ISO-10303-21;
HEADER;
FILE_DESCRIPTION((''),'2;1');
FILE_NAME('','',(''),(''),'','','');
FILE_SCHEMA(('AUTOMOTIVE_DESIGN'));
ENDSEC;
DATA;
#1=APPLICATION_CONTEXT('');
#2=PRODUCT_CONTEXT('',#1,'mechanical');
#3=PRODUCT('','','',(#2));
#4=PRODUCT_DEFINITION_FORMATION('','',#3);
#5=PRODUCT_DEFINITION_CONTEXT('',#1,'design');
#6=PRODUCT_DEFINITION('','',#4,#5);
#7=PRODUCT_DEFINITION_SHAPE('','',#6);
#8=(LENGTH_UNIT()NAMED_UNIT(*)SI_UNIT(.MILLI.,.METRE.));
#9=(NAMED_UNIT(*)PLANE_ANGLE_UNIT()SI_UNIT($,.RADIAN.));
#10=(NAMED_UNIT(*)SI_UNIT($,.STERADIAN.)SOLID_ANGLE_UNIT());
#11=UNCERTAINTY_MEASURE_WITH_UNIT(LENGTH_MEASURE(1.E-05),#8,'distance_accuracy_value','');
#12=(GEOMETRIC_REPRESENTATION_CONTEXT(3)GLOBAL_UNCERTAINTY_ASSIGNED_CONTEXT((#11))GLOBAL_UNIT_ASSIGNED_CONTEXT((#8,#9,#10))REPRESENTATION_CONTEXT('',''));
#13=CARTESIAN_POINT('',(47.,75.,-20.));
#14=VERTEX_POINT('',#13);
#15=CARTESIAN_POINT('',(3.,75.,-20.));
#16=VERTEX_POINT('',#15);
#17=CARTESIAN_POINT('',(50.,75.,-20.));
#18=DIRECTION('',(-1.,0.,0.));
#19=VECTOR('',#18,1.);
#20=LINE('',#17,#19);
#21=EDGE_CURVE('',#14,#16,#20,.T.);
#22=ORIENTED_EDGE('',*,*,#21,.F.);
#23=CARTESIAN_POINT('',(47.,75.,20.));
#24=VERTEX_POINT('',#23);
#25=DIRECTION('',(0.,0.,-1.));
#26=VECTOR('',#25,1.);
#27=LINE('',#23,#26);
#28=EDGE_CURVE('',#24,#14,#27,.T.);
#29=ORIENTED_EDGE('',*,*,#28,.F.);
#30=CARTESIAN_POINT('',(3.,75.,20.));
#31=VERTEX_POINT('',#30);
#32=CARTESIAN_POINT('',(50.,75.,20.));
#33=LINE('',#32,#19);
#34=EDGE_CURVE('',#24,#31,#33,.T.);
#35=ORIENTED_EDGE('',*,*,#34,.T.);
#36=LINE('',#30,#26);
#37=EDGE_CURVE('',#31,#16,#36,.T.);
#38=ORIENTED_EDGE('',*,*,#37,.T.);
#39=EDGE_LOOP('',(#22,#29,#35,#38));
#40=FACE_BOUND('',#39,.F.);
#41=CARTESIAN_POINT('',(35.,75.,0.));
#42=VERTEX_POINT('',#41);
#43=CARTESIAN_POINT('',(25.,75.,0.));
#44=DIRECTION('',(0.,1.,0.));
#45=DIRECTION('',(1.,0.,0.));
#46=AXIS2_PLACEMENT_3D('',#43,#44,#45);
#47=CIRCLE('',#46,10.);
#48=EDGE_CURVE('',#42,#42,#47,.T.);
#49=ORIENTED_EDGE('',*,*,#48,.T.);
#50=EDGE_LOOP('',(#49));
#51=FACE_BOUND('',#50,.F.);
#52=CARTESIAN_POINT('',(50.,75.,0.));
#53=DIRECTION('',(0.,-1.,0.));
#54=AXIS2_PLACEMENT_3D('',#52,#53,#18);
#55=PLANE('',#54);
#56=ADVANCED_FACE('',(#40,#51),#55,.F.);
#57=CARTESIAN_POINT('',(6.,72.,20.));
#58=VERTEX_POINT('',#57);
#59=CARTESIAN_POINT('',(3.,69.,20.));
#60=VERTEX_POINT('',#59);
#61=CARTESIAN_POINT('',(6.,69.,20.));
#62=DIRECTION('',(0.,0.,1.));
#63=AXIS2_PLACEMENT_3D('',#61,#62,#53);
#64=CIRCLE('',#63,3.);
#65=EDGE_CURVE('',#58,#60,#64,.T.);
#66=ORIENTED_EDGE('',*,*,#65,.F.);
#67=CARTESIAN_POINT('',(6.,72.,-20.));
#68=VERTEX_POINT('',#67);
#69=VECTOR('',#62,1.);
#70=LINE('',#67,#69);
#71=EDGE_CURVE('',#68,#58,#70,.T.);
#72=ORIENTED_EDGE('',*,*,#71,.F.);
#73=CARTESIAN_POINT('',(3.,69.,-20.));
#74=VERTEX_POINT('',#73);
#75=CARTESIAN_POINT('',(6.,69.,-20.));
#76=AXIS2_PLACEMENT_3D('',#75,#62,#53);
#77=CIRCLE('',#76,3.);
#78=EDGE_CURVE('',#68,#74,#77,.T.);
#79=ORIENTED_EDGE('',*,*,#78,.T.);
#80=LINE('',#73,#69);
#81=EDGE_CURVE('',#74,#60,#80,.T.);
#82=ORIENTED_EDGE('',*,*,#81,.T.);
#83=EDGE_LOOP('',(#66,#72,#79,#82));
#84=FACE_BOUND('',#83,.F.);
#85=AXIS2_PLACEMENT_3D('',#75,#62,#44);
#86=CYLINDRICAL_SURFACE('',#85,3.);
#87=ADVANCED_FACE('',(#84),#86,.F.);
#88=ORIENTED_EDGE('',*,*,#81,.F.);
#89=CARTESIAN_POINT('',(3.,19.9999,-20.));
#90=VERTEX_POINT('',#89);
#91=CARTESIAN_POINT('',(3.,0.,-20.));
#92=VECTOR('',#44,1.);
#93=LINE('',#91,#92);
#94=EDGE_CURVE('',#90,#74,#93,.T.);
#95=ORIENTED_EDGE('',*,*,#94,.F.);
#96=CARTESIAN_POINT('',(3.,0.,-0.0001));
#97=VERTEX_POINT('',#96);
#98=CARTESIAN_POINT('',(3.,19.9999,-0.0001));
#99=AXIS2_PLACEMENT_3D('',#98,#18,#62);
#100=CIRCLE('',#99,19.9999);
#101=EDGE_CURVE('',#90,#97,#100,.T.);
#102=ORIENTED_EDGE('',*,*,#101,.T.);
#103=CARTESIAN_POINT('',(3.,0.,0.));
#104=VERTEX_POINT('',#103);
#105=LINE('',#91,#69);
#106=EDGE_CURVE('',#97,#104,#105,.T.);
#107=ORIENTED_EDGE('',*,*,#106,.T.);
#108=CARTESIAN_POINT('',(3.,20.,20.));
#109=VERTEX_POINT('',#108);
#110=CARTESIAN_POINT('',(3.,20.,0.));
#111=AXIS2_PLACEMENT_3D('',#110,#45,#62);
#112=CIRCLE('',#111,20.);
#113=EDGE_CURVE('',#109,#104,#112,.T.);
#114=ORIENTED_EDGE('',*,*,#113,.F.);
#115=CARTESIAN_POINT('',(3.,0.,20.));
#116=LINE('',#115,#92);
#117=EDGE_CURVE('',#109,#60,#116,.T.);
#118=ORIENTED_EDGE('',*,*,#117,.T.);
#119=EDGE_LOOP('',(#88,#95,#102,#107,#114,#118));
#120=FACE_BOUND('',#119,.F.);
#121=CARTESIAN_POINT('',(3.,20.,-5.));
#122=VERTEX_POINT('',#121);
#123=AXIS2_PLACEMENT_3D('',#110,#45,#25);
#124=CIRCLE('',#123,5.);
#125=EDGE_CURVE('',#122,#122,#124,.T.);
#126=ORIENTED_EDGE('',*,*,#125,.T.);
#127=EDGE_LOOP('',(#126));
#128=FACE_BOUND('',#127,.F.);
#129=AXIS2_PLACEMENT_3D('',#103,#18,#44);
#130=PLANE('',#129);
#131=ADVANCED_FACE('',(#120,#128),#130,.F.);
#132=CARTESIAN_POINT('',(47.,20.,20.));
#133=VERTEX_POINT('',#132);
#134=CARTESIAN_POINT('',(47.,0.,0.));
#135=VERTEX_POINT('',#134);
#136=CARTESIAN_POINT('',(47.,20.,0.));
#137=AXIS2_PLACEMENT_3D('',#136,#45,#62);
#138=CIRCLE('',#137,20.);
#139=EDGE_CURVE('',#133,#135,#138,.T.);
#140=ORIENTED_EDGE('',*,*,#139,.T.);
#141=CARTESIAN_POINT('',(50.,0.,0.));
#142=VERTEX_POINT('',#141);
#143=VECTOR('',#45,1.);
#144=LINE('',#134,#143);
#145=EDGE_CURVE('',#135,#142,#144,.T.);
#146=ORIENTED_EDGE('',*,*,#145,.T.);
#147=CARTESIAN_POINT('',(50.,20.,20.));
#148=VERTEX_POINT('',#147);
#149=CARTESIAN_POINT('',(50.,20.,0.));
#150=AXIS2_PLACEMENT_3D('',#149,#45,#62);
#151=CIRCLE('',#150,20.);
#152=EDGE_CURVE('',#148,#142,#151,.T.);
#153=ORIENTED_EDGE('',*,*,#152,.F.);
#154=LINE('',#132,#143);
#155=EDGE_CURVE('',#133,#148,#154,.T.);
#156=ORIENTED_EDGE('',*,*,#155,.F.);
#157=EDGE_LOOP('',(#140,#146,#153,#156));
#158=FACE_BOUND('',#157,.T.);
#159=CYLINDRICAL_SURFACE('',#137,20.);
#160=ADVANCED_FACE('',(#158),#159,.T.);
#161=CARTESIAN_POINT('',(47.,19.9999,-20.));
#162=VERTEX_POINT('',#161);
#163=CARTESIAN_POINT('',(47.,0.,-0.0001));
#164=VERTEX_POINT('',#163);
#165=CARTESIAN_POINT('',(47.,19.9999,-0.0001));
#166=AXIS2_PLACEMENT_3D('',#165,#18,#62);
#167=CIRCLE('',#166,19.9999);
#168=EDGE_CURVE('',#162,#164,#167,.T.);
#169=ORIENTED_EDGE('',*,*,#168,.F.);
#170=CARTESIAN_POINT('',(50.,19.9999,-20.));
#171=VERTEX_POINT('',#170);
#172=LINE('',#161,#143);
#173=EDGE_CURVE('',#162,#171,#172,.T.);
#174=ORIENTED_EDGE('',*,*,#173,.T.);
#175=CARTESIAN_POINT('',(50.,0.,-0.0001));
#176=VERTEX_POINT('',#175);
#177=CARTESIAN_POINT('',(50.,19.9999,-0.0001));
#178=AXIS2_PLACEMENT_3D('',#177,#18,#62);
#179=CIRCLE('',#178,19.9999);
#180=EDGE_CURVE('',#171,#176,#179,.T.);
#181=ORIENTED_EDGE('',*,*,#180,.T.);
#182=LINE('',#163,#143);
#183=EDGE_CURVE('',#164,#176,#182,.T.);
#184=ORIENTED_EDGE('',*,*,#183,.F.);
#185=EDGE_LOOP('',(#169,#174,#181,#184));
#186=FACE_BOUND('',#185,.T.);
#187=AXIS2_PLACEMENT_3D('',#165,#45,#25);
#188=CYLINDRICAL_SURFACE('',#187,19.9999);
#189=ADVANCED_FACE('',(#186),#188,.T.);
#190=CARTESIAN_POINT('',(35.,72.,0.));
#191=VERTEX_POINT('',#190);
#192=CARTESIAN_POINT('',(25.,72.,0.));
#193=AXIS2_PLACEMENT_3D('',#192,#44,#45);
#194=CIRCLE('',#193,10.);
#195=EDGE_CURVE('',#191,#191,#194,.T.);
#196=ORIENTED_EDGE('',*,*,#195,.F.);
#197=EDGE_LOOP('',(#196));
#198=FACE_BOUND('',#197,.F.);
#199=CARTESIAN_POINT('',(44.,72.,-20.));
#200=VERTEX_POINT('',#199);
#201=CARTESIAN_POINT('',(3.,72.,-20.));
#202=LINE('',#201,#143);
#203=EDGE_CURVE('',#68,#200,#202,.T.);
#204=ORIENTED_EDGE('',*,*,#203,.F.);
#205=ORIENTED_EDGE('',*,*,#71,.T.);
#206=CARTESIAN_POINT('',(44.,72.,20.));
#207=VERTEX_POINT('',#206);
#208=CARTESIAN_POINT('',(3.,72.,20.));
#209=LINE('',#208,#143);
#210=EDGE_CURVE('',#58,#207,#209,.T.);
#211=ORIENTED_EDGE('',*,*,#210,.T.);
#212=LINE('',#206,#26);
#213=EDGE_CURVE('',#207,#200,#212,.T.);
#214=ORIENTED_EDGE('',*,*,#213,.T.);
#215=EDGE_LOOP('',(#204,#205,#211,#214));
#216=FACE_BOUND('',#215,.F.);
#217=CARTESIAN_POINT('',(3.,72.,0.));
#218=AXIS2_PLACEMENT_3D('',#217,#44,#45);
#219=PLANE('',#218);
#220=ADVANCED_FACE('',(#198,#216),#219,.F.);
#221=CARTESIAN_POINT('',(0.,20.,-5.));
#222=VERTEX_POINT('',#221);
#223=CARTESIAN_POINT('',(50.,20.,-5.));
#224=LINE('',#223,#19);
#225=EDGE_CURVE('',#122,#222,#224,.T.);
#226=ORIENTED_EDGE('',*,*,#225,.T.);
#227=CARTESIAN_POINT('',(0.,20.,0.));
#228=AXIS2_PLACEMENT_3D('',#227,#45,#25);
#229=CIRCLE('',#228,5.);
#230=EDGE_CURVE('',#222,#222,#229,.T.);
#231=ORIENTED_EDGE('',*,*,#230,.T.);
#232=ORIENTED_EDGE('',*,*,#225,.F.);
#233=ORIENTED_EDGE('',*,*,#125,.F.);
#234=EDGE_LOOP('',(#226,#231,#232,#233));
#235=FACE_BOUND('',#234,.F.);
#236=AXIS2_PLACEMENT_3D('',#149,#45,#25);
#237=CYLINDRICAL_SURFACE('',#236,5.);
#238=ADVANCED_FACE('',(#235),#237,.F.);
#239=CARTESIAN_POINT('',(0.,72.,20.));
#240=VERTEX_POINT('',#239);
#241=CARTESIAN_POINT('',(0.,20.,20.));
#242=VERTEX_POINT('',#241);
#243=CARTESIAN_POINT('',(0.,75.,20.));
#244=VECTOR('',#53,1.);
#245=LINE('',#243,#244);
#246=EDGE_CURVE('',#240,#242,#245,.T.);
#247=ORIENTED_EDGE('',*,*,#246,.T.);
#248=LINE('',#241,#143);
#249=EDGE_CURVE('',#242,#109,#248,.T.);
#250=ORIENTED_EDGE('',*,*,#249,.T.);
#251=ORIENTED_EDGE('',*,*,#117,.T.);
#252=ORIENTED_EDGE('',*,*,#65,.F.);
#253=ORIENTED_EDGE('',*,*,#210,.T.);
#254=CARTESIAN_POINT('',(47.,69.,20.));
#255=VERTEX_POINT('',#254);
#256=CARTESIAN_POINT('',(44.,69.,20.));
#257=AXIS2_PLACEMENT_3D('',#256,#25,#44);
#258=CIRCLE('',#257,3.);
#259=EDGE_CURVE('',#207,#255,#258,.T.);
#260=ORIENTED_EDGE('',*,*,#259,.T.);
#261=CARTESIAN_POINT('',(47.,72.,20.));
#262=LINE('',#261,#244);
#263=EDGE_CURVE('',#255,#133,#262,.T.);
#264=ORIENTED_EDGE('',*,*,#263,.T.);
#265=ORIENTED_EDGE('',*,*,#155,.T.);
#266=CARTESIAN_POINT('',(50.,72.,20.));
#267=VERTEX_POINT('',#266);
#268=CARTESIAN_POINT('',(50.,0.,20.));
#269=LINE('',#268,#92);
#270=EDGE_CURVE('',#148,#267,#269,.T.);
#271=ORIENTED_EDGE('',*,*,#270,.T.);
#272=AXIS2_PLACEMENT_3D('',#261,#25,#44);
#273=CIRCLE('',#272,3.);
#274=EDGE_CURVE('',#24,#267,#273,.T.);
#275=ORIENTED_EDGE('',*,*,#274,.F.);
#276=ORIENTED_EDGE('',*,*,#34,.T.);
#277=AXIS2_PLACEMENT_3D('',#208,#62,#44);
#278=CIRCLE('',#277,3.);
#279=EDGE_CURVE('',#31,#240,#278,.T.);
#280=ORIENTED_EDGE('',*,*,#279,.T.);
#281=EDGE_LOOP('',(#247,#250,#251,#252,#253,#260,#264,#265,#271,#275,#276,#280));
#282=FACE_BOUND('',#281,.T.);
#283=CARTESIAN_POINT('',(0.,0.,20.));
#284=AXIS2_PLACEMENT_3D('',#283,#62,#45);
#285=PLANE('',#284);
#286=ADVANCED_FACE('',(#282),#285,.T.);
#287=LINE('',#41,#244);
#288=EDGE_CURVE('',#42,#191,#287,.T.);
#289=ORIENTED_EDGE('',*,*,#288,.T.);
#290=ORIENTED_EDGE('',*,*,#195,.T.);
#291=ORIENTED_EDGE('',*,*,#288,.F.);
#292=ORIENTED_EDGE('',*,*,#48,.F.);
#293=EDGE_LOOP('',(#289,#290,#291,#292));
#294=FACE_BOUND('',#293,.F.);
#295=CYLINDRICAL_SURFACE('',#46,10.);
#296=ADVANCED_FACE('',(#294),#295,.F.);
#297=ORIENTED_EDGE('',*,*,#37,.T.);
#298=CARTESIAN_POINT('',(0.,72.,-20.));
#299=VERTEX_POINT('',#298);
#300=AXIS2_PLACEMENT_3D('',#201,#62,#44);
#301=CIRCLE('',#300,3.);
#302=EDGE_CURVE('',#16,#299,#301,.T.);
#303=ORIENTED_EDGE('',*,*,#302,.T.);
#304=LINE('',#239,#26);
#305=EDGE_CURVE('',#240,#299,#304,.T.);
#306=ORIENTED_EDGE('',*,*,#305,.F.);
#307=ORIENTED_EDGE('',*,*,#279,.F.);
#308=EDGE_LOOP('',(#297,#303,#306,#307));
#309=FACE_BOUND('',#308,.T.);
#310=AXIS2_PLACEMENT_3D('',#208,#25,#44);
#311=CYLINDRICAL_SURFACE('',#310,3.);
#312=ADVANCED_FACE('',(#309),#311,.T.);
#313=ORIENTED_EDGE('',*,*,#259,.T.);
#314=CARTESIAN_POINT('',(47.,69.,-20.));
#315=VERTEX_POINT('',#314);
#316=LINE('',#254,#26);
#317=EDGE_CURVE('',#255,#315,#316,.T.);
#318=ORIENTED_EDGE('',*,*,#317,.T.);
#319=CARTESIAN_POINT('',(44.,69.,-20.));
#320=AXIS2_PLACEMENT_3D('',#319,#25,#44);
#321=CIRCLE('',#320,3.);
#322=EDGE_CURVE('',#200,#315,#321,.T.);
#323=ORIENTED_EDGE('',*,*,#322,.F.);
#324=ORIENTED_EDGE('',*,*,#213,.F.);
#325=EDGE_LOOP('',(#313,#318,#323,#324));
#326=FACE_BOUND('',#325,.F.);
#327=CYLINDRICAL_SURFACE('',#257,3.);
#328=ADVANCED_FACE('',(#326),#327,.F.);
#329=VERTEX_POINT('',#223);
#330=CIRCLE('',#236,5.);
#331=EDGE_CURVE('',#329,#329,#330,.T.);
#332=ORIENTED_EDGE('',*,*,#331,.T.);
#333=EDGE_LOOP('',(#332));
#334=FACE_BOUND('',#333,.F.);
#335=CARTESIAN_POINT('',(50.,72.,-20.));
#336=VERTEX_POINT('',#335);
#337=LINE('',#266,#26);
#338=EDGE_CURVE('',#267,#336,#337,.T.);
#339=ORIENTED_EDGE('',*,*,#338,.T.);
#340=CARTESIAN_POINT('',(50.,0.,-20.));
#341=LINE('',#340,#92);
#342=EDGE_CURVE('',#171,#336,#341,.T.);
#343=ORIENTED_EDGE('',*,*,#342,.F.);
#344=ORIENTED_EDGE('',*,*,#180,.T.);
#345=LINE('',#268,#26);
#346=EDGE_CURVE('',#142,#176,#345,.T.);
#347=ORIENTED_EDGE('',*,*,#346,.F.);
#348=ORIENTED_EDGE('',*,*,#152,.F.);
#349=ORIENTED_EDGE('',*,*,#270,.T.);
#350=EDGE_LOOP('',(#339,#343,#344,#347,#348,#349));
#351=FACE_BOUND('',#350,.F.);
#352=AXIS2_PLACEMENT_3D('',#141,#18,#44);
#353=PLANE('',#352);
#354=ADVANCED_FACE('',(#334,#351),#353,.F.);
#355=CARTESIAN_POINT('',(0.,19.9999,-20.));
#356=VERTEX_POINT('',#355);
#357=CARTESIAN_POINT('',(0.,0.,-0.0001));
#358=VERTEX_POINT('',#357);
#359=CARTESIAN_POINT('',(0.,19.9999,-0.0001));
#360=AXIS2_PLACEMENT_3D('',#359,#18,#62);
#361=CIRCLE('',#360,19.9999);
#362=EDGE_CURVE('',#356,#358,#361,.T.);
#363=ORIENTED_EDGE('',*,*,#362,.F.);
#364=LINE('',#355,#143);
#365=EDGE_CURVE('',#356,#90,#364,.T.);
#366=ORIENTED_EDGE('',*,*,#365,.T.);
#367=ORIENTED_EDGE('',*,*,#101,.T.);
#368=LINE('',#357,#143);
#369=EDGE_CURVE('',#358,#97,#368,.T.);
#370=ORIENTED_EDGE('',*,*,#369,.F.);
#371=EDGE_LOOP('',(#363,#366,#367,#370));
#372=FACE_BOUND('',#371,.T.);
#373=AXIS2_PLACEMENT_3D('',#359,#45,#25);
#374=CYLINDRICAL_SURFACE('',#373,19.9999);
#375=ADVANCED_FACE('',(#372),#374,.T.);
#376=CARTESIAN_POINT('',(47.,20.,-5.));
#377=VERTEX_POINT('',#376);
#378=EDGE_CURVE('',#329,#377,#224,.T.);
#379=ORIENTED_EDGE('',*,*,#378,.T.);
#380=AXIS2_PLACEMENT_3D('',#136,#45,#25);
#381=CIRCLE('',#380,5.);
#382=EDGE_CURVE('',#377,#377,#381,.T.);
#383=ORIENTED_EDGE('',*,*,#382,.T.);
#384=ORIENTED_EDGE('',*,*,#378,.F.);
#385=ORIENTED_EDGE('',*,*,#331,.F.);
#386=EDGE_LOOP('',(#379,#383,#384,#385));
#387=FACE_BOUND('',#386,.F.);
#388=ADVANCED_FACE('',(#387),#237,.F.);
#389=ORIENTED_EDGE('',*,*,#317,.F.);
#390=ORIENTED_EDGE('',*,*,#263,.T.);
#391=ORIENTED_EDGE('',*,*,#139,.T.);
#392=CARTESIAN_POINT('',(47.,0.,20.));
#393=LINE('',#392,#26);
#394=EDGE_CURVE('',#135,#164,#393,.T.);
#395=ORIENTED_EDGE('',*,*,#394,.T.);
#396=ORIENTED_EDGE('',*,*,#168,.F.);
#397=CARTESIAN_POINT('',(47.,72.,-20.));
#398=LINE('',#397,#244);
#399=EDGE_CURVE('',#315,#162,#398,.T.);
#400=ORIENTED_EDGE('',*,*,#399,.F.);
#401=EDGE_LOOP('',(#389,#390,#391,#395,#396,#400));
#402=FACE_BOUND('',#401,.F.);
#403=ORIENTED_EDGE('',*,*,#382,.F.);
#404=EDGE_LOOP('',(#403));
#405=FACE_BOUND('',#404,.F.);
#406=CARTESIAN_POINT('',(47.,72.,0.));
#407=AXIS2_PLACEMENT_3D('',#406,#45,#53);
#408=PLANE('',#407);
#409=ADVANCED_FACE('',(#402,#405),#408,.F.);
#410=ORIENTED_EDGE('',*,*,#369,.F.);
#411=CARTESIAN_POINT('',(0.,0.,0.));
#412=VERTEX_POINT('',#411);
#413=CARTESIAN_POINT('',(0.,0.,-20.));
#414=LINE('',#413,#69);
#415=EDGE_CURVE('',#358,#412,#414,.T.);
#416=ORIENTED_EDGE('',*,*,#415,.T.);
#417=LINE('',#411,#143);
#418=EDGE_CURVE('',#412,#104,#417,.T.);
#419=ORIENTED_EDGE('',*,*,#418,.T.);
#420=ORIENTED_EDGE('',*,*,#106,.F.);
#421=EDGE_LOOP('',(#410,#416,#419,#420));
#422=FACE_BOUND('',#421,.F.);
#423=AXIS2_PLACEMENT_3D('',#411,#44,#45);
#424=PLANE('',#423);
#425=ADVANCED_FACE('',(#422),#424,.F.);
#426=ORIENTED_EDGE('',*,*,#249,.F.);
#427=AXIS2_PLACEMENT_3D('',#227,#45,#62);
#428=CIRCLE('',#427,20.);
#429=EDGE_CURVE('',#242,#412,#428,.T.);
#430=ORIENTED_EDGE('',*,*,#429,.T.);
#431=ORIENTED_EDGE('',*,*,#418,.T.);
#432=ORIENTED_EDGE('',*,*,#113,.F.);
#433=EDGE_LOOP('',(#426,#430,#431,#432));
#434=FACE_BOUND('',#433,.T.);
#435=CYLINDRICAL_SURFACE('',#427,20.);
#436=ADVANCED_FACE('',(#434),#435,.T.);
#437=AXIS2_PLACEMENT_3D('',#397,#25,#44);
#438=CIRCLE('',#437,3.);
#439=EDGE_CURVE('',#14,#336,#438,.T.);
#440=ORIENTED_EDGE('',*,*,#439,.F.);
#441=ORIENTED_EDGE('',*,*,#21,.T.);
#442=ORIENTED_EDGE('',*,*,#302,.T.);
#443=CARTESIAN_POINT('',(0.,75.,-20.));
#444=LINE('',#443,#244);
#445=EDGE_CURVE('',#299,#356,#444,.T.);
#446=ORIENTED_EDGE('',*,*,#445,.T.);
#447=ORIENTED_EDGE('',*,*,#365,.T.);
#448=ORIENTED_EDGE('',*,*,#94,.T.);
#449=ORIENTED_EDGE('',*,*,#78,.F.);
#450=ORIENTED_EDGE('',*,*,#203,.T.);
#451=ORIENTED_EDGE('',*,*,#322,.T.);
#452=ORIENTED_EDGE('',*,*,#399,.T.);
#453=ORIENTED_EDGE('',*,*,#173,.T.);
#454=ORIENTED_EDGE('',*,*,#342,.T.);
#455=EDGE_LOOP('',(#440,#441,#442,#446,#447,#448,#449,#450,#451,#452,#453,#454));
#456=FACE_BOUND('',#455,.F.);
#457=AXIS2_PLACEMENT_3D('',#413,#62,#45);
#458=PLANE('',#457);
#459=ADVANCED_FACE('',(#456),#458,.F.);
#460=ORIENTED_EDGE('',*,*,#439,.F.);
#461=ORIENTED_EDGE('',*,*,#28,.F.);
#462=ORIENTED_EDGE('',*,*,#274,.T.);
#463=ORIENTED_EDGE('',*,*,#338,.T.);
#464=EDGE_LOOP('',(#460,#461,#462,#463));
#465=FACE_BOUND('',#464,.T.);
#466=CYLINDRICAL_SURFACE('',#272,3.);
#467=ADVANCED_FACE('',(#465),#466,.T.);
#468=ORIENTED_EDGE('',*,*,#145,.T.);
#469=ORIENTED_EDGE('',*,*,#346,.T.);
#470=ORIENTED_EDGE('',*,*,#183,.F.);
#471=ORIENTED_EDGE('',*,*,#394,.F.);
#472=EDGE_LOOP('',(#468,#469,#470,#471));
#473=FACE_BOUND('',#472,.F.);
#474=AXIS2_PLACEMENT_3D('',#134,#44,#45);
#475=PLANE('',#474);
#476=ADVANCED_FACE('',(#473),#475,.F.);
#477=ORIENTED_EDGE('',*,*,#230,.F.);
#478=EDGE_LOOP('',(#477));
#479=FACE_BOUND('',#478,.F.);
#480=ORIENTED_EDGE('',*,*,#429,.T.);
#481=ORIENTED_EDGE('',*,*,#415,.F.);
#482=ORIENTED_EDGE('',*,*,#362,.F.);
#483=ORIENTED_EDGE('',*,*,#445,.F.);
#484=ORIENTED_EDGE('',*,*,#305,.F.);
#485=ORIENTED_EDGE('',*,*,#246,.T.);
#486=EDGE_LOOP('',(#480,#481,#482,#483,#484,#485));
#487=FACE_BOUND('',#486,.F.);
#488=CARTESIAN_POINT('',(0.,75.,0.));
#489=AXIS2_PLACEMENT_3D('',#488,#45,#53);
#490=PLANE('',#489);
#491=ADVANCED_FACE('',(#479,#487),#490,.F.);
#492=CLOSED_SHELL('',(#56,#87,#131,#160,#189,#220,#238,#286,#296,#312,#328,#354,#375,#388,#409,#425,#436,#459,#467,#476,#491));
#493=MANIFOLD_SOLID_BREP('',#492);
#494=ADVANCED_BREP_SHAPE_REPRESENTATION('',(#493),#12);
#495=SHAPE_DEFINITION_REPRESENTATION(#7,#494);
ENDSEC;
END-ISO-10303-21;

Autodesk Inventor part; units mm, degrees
ref_plane "YZ Plane" through (0, 0, 0) normal (1, 0, 0) x (0, 1, 0)
ref_plane "XZ Plane" through (0, 0, 0) normal (0, 1, 0) x (-1, 0, 0)
ref_plane "XY Plane" through (0, 0, 0) normal (0, 0, 1) x (1, 0, 0)
sketch "Sketch1" plane through (0, 0, 0) normal (0, 0, 1) x (1, 0, 0)
  line L0 (0, 0) -> (3, 0)
  line L1 (3, 0) -> (3, 72)
  line L2 (3, 72) -> (47, 72)
  line L3 (47, 72) -> (47, 0)
  line L4 (47, 0) -> (50, 0)
  line L5 (50, 0) -> (50, 75)
  line L6 (50, 75) -> (0, 75)
  line L7 (0, 75) -> (0, 0)
  dimension "d0" = 75
  dimension "d2" = 3
  dimension "d3" = 3
  dimension "d4" = 3
  dimension "d21" = 50
extrude "Extrusion1" add sketch "Sketch1" along normal mid plane 40
fillet "Fillet1" radius 3 1 edges at (50, 75, 0)
fillet "Fillet2" radius 3 1 edges at (0, 75, 0)
fillet "Fillet3" radius 20 1 edges at (48.5, 0, 20)
fillet "Fillet4" radius 20 1 edges at (1.5, 0, 20)
fillet "Fillet5" radius 20 1 edges at (48.5, 0, -20)
fillet "Fillet6" radius 20 1 edges at (1.5, 0, -20)
sketch "Sketch2" plane through (50, 72, 20) normal (1, 0, 0) x (0, 0, -1)
  arc A0 (0, -52) -> (40, -52) centre (20, -52) ccw projected
  circle A1 centre (20, -52) radius 5
  point P0 (20, -72)
  dimension "d13" = 10
extrude "Extrusion2" cut sketch "Sketch2" against normal through all
sketch "Sketch3" plane through (47, 75, 20) normal (0, 1, 0) x (1, 0, 0)
  line L0 (-47, 20) -> (3, 20) construction
  line L1 (3, 25) -> (3, 15) projected
  circle A0 centre (-22, 20) radius 10
  dimension "d16" = 20
extrude "Extrusion3" cut sketch "Sketch3" against normal blind 10
fillet "Fillet7" radius 3 1 edges at (47, 72, 0)
fillet "Fillet8" radius 3 1 edges at (3, 72, 0)
properties part number "Part1dia7demaio" material "Steel, Carbon"
